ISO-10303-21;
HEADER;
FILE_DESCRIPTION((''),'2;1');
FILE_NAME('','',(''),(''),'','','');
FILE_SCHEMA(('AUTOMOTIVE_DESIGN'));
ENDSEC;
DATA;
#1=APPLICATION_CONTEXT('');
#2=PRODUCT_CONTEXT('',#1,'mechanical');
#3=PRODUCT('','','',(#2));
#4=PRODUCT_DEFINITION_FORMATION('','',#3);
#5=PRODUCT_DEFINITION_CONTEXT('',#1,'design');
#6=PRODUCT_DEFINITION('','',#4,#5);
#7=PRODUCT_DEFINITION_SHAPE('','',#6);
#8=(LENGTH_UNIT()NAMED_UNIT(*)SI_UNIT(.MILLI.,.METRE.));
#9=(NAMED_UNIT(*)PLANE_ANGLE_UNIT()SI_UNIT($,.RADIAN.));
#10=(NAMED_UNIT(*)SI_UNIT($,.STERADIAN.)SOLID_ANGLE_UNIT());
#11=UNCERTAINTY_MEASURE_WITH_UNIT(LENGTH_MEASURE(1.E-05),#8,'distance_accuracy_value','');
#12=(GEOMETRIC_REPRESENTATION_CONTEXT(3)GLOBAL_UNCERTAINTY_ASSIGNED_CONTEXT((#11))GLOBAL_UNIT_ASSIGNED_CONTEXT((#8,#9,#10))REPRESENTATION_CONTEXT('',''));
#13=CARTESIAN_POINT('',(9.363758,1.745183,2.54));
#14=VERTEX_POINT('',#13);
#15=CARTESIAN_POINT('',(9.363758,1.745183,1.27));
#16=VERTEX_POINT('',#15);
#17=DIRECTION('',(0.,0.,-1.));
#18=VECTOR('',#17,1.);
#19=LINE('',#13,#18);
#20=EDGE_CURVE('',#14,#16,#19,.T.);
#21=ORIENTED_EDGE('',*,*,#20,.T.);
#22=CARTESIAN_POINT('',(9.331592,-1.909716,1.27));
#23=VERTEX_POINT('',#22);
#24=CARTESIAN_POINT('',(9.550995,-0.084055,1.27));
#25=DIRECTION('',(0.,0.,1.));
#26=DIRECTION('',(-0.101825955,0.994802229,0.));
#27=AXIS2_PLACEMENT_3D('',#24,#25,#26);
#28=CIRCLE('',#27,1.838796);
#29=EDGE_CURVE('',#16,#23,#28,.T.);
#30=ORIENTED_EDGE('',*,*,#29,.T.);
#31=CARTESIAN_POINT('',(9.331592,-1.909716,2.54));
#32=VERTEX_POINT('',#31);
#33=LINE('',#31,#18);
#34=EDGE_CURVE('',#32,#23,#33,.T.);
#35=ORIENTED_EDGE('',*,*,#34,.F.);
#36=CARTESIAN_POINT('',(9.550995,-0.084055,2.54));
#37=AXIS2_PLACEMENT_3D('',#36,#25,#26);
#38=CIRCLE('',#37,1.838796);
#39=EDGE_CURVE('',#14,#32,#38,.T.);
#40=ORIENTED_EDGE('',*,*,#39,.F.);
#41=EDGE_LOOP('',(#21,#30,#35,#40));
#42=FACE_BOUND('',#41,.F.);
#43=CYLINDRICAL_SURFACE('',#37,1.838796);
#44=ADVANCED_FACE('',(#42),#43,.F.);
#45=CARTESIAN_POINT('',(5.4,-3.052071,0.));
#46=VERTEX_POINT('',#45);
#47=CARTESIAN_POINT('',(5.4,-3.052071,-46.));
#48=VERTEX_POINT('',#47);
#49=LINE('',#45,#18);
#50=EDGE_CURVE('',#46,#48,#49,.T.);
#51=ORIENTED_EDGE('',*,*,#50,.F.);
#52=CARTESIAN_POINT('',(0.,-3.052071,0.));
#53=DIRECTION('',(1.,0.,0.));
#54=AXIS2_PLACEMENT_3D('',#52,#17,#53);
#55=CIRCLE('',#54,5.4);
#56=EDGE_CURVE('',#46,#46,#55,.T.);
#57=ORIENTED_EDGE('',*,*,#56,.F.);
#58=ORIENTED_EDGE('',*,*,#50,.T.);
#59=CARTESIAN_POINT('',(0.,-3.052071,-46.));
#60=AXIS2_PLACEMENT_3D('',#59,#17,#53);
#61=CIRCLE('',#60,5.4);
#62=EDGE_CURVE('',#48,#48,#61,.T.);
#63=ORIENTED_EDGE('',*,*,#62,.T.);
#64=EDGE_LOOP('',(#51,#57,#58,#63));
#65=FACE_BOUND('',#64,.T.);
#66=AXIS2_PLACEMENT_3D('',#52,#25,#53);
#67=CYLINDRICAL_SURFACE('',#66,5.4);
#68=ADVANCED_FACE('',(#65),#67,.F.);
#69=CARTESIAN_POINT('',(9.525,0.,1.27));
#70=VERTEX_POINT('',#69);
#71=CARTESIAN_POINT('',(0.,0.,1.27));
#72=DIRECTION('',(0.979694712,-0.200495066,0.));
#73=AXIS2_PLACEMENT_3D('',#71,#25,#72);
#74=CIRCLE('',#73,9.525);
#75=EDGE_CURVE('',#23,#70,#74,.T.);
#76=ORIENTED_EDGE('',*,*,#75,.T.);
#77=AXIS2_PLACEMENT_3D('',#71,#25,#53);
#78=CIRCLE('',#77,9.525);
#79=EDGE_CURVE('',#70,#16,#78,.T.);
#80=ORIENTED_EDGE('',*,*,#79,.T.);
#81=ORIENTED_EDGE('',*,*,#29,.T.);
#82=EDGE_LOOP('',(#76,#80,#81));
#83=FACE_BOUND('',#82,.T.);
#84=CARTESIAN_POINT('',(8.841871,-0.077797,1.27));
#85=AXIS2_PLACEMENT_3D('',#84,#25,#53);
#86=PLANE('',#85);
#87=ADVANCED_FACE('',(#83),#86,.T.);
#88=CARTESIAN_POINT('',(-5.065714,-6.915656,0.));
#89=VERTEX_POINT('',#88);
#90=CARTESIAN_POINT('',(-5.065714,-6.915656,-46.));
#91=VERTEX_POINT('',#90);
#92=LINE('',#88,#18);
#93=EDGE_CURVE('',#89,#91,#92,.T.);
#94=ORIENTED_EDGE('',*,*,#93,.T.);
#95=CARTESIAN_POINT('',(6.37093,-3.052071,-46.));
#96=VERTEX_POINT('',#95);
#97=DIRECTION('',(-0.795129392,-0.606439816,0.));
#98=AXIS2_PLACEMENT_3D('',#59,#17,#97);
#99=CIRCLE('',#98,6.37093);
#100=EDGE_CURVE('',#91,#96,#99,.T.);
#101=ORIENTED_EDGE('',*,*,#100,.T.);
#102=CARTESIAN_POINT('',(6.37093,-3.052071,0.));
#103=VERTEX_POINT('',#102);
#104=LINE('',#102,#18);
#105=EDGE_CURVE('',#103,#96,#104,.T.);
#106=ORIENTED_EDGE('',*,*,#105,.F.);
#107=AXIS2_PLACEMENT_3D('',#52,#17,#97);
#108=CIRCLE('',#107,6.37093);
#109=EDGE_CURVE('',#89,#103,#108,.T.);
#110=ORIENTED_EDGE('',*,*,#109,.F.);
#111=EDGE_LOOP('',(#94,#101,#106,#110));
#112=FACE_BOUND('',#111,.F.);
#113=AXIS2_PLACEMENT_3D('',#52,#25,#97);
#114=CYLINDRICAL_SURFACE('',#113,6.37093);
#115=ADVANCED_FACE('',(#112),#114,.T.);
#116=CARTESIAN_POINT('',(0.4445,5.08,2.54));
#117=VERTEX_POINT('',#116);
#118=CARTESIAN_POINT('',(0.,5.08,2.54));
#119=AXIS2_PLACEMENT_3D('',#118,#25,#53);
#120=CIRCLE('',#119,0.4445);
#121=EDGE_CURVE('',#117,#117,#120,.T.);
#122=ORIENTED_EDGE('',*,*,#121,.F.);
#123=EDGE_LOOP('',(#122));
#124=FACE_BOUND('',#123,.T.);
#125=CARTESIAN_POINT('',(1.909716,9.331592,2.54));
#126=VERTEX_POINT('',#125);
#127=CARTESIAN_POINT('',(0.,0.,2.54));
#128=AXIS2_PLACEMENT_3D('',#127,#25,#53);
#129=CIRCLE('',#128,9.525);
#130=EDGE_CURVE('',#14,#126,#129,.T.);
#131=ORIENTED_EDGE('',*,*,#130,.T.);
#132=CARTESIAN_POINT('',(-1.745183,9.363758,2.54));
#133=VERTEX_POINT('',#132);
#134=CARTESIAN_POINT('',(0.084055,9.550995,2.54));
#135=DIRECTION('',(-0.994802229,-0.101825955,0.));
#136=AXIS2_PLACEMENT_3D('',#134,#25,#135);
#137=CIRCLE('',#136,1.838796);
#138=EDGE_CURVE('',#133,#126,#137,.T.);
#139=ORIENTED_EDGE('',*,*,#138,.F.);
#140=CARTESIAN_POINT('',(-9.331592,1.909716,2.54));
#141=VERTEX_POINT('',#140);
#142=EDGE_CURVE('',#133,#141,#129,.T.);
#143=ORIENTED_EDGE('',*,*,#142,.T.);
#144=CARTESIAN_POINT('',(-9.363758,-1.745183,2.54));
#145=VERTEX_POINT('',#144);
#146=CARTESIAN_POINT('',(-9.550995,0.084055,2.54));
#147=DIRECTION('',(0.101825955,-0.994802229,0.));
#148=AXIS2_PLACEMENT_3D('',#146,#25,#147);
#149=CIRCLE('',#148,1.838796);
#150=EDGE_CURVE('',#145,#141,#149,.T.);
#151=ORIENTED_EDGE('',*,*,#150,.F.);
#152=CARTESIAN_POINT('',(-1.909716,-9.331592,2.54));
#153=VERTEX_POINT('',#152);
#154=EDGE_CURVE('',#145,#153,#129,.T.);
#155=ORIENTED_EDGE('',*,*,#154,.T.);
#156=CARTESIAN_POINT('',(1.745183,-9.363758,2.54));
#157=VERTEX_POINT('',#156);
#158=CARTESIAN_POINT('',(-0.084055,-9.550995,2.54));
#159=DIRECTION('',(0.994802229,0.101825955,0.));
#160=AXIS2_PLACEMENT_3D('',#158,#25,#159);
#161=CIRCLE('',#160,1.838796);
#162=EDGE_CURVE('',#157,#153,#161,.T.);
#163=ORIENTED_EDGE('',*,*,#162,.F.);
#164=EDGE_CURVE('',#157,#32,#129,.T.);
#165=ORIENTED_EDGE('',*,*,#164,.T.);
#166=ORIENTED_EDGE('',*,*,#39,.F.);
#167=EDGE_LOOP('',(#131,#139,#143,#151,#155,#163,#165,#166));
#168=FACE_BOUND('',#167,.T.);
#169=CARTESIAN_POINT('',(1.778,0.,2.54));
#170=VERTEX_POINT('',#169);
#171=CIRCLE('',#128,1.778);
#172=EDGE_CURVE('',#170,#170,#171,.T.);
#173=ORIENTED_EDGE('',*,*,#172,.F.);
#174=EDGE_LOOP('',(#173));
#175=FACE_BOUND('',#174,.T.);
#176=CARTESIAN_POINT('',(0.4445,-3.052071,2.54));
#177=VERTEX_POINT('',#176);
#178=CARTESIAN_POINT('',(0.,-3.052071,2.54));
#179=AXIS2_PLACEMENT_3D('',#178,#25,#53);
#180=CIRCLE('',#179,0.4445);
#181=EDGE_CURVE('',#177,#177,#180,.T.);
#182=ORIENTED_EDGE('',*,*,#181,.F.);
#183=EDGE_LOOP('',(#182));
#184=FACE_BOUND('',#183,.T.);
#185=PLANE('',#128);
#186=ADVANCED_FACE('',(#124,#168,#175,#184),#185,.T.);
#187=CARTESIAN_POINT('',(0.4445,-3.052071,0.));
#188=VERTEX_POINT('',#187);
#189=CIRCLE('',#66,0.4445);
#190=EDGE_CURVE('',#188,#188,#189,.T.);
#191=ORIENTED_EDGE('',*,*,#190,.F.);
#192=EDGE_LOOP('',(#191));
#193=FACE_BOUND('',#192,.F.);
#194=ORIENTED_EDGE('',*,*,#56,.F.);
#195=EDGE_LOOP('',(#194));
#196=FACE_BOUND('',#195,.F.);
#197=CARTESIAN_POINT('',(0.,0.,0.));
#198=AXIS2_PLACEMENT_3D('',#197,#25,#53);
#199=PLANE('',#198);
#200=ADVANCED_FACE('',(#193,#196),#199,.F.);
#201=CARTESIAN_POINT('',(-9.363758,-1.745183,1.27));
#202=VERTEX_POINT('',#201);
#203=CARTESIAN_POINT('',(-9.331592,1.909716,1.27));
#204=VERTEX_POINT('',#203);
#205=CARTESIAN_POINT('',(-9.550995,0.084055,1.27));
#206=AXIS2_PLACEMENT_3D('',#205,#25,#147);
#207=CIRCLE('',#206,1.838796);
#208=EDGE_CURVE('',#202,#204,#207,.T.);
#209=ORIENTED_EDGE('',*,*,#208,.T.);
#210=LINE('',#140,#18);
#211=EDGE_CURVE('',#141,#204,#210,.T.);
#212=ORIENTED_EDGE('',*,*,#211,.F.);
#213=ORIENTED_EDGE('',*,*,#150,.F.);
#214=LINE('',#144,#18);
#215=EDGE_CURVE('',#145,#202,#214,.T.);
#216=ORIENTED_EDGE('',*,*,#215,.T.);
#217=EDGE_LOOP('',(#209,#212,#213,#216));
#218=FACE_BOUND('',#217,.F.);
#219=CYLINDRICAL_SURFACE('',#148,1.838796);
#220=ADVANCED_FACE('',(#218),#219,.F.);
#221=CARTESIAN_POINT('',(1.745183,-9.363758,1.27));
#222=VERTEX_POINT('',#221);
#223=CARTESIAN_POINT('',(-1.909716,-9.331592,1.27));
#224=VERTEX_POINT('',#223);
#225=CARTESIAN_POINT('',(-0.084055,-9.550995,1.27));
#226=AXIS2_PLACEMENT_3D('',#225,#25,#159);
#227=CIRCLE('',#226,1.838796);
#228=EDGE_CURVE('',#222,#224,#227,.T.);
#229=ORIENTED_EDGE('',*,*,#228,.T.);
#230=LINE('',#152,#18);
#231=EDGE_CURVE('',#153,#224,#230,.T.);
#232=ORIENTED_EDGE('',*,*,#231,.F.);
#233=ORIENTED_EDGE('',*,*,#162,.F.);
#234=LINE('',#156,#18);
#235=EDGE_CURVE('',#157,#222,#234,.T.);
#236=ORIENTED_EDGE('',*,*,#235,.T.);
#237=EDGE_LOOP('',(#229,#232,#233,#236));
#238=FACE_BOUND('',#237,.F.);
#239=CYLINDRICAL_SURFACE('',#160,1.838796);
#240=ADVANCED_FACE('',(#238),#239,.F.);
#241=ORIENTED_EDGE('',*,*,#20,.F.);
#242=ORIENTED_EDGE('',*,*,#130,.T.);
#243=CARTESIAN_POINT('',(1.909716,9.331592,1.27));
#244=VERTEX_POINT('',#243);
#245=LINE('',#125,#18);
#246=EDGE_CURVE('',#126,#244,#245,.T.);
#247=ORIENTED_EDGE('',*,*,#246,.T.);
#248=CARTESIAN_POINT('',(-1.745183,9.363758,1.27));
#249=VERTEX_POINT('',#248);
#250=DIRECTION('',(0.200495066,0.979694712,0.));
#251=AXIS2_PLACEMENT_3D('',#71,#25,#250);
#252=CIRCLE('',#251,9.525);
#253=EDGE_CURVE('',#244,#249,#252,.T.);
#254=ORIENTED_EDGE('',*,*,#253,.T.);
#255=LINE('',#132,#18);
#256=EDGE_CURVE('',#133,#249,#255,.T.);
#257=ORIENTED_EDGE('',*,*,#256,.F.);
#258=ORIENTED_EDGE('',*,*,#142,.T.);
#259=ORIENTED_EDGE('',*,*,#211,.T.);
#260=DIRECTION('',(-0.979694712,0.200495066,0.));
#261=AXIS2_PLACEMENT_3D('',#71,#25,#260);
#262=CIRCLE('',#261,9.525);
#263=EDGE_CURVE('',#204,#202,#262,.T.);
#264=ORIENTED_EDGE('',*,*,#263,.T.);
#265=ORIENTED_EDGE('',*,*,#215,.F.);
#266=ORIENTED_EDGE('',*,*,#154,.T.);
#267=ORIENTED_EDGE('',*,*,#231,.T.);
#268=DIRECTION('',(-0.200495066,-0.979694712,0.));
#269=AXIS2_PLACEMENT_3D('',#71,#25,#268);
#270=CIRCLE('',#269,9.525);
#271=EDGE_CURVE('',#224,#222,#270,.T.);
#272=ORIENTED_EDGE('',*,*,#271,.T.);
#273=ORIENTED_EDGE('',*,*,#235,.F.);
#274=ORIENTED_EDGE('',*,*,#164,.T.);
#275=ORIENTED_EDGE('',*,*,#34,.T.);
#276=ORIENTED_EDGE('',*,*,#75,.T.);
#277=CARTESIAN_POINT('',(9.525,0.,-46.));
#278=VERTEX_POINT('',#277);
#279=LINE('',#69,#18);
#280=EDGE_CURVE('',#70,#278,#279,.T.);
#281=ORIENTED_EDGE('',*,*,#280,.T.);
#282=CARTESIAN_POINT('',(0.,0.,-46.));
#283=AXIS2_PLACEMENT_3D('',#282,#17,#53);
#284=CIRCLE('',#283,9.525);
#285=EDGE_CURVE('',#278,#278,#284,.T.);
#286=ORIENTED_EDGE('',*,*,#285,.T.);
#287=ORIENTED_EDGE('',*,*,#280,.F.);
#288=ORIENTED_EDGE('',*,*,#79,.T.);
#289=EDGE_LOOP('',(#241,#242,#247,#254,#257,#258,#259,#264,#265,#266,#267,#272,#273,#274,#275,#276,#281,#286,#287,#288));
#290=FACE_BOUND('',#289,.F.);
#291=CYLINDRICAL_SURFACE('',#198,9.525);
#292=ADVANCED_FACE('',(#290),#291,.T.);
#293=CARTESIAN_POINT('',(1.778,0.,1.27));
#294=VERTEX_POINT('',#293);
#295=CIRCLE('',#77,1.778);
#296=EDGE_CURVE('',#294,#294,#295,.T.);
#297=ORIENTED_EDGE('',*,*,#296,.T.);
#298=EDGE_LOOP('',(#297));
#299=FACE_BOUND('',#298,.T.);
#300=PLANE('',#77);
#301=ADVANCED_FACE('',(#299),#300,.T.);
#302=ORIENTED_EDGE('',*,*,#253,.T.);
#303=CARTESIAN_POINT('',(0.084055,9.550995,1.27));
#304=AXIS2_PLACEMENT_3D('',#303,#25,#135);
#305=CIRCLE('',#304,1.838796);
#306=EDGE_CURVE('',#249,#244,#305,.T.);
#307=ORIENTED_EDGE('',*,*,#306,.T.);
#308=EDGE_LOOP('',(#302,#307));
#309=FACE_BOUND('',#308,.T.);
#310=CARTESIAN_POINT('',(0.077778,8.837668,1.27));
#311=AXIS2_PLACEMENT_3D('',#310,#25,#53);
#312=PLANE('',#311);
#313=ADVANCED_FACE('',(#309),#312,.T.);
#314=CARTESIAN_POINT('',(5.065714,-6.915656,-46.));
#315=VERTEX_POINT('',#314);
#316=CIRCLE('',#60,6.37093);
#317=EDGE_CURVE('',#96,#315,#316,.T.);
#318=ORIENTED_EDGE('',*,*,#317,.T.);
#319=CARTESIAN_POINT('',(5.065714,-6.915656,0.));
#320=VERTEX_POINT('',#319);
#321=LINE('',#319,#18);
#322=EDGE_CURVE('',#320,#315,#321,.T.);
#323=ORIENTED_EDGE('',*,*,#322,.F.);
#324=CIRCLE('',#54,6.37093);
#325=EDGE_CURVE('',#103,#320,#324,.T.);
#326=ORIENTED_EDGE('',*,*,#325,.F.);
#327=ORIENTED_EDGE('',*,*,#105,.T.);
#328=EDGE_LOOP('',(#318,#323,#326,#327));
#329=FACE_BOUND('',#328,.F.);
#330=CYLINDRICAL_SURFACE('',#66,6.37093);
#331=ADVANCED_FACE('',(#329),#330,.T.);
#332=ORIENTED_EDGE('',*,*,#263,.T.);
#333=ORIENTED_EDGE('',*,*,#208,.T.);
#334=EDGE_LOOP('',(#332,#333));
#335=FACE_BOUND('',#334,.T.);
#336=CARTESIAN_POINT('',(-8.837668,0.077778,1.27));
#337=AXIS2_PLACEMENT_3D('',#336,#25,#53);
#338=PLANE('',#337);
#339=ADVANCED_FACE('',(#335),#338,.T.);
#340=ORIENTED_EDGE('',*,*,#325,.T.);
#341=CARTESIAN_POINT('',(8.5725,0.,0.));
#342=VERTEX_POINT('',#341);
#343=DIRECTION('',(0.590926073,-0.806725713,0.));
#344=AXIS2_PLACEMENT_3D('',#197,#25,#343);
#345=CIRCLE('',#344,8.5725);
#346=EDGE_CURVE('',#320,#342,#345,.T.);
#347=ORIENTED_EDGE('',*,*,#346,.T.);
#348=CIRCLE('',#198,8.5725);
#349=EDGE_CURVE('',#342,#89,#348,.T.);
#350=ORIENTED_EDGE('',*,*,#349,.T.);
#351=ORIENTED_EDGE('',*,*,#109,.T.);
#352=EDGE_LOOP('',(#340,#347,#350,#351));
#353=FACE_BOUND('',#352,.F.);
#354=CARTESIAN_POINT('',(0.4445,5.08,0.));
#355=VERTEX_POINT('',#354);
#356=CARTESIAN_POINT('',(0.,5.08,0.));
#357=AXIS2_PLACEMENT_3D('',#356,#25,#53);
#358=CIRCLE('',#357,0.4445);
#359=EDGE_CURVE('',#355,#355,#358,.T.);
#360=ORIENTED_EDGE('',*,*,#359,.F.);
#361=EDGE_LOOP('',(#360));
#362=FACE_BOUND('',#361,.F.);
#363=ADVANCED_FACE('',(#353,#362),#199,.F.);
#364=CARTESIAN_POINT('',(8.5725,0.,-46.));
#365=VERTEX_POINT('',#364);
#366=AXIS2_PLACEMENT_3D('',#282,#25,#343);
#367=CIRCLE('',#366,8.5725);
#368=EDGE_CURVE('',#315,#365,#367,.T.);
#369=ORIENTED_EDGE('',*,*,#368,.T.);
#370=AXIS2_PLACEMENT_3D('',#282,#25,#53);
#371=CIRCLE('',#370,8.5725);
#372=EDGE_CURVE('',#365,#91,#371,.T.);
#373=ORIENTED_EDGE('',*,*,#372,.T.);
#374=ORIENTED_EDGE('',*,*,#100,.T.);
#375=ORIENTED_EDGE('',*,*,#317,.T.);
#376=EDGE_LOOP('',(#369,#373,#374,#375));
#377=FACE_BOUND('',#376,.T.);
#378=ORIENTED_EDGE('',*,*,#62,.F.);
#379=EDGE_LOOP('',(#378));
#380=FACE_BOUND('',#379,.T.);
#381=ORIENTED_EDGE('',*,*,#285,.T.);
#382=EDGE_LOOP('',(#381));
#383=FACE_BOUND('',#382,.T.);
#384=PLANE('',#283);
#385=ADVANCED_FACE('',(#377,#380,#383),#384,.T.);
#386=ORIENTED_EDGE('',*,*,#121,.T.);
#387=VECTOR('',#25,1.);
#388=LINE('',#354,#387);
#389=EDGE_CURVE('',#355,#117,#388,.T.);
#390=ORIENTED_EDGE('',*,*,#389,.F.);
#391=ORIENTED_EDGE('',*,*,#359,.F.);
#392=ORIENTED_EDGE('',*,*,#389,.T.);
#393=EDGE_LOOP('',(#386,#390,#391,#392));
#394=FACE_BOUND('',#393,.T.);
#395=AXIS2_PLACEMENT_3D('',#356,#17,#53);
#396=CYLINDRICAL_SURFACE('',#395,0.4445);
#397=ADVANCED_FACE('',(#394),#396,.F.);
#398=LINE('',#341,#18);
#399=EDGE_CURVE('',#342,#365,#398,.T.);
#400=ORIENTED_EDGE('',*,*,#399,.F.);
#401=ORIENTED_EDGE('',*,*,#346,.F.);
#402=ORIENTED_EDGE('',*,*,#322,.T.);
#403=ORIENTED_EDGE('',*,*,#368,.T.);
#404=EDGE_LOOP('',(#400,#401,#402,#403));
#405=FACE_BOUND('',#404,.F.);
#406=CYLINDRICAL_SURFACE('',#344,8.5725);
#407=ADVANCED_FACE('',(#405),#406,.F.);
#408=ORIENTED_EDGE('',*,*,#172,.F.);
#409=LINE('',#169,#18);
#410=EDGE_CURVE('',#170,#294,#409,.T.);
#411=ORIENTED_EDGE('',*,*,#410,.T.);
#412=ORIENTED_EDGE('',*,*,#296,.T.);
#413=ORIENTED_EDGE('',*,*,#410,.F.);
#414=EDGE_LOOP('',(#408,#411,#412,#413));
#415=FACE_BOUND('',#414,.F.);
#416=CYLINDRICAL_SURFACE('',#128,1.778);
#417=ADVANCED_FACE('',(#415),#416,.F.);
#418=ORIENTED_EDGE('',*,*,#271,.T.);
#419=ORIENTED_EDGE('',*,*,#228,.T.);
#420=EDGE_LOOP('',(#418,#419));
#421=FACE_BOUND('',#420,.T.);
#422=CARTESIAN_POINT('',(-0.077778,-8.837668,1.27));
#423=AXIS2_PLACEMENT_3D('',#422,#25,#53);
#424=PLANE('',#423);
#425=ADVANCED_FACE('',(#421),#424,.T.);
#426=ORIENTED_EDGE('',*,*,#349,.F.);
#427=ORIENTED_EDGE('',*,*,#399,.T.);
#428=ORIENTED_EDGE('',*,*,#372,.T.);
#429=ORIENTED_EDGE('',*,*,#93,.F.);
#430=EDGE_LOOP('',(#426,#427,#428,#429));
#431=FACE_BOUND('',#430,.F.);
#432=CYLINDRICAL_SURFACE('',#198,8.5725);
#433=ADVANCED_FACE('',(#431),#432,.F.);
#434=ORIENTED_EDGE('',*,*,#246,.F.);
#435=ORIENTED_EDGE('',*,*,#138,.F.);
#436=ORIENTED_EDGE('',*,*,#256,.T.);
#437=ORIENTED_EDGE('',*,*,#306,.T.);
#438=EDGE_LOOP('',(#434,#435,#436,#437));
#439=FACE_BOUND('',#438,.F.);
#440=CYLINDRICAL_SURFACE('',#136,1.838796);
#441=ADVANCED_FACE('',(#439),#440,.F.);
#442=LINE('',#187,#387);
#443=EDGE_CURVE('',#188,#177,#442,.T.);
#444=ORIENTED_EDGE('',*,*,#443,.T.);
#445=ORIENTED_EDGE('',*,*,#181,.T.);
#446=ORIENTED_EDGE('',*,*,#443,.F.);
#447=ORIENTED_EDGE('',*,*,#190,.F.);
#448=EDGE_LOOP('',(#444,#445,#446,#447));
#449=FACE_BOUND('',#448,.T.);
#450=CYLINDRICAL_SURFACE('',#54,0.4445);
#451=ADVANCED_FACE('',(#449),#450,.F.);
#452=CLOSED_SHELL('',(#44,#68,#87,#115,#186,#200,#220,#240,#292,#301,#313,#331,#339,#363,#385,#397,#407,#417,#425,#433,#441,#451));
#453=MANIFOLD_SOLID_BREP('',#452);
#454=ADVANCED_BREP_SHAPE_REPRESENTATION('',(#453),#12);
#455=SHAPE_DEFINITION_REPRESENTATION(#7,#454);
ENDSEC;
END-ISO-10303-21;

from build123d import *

# Parameters (mm, degrees)
F0_R     = 9.525
F0_R_2   = 0.4445
F1_DEPTH = 2.54
F2_R     = 1.778
F3_DEPTH = 1.27
F4_R     = 9.525
F4_R_2   = 5.4
F5_DEPTH = 46


# Not quite as in the source:
# - a feature names something its author has since deleted; it is built from what else it names


with BuildPart() as f1:
    # F0 (on Top) → F1 (new body)
    with BuildSketch(Plane.XY):
        Circle(F0_R)
        with Locations((0, -3.0520705041)):
            Circle(F0_R_2, mode=Mode.SUBTRACT)
        with Locations((0, 5.08)):
            Circle(F0_R_2, mode=Mode.SUBTRACT)
    extrude(amount=F1_DEPTH)

    # F2 (on face) → F3 (cut)
    with BuildSketch(Plane.XY.offset(2.54)):
        Circle(F2_R)
        with BuildLine():
            ThreePointArc((9.525, 0), (9.4846037847, 0.876308192), (9.3637577853, 1.7451834108))
            ThreePointArc((9.3637577853, 1.7451834108), (7.7122697392, -0.0678733407), (9.3315921315, -1.9097155001))
            ThreePointArc((9.3315921315, -1.9097155001), (9.4765246808, -0.9597421392), (9.525, 0))
        make_face()
        with BuildLine():
            ThreePointArc((-1.7451834108, 9.3637577853), (0.0678733407, 7.7122697392), (1.9097155001, 9.3315921315))
            ThreePointArc((1.9097155001, 9.3315921315), (0.0838233823, 9.5246311551), (-1.7451834108, 9.3637577853))
        make_face()
        with BuildLine():
            ThreePointArc((-1.9097155001, -9.3315921315), (-0.0838233823, -9.5246311551), (1.7451834108, -9.3637577853))
            ThreePointArc((1.7451834108, -9.3637577853), (-0.0678733407, -7.7122697392), (-1.9097155001, -9.3315921315))
        make_face()
        with BuildLine():
            ThreePointArc((-9.3637577853, -1.7451834108), (-7.7122697392, 0.0678733407), (-9.3315921315, 1.9097155001))
            ThreePointArc((-9.3315921315, 1.9097155001), (-9.5246311551, 0.0838233823), (-9.3637577853, -1.7451834108))
        make_face()
    extrude(amount=-F3_DEPTH, mode=Mode.SUBTRACT)

    # F4 (on face) → F5 (join)
    with BuildSketch(Plane(origin=(0, 0, 0), x_dir=(1, 0, 0), z_dir=(0, 0, -1))):
        Circle(F4_R)
        with BuildLine():
            ThreePointArc((5.0657137645, 6.9156561732), (7.6457042676, 3.8769785274), (8.5725, 0))
            ThreePointArc((8.5725, 0), (-3.8769785274, -7.6457042676), (-5.0657137645, 6.9156561732))
            ThreePointArc((-5.0657137645, 6.9156561732), (0, 9.4230005905), (5.0657137645, 6.9156561732))
        make_face(mode=Mode.SUBTRACT)
        with BuildLine():
            ThreePointArc((6.3709300865, 3.0520705041), (6.0358122236, 5.0911195392), (5.0657137645, 6.9156561732))
            ThreePointArc((5.0657137645, 6.9156561732), (0, 8.5725), (-5.0657137645, 6.9156561732))
            ThreePointArc((-5.0657137645, 6.9156561732), (-2.0390490351, -2.9837417196), (6.3709300865, 3.0520705041))
        make_face()
        with Locations((0, 3.0520705041)):
            Circle(F4_R_2, mode=Mode.SUBTRACT)
        with BuildLine():
            ThreePointArc((-5.0657137645, 6.9156561732), (0, 8.5725), (5.0657137645, 6.9156561732))
            ThreePointArc((5.0657137645, 6.9156561732), (0, 9.4230005905), (-5.0657137645, 6.9156561732))
        make_face()
    extrude(amount=F5_DEPTH)


solid = f1.part
